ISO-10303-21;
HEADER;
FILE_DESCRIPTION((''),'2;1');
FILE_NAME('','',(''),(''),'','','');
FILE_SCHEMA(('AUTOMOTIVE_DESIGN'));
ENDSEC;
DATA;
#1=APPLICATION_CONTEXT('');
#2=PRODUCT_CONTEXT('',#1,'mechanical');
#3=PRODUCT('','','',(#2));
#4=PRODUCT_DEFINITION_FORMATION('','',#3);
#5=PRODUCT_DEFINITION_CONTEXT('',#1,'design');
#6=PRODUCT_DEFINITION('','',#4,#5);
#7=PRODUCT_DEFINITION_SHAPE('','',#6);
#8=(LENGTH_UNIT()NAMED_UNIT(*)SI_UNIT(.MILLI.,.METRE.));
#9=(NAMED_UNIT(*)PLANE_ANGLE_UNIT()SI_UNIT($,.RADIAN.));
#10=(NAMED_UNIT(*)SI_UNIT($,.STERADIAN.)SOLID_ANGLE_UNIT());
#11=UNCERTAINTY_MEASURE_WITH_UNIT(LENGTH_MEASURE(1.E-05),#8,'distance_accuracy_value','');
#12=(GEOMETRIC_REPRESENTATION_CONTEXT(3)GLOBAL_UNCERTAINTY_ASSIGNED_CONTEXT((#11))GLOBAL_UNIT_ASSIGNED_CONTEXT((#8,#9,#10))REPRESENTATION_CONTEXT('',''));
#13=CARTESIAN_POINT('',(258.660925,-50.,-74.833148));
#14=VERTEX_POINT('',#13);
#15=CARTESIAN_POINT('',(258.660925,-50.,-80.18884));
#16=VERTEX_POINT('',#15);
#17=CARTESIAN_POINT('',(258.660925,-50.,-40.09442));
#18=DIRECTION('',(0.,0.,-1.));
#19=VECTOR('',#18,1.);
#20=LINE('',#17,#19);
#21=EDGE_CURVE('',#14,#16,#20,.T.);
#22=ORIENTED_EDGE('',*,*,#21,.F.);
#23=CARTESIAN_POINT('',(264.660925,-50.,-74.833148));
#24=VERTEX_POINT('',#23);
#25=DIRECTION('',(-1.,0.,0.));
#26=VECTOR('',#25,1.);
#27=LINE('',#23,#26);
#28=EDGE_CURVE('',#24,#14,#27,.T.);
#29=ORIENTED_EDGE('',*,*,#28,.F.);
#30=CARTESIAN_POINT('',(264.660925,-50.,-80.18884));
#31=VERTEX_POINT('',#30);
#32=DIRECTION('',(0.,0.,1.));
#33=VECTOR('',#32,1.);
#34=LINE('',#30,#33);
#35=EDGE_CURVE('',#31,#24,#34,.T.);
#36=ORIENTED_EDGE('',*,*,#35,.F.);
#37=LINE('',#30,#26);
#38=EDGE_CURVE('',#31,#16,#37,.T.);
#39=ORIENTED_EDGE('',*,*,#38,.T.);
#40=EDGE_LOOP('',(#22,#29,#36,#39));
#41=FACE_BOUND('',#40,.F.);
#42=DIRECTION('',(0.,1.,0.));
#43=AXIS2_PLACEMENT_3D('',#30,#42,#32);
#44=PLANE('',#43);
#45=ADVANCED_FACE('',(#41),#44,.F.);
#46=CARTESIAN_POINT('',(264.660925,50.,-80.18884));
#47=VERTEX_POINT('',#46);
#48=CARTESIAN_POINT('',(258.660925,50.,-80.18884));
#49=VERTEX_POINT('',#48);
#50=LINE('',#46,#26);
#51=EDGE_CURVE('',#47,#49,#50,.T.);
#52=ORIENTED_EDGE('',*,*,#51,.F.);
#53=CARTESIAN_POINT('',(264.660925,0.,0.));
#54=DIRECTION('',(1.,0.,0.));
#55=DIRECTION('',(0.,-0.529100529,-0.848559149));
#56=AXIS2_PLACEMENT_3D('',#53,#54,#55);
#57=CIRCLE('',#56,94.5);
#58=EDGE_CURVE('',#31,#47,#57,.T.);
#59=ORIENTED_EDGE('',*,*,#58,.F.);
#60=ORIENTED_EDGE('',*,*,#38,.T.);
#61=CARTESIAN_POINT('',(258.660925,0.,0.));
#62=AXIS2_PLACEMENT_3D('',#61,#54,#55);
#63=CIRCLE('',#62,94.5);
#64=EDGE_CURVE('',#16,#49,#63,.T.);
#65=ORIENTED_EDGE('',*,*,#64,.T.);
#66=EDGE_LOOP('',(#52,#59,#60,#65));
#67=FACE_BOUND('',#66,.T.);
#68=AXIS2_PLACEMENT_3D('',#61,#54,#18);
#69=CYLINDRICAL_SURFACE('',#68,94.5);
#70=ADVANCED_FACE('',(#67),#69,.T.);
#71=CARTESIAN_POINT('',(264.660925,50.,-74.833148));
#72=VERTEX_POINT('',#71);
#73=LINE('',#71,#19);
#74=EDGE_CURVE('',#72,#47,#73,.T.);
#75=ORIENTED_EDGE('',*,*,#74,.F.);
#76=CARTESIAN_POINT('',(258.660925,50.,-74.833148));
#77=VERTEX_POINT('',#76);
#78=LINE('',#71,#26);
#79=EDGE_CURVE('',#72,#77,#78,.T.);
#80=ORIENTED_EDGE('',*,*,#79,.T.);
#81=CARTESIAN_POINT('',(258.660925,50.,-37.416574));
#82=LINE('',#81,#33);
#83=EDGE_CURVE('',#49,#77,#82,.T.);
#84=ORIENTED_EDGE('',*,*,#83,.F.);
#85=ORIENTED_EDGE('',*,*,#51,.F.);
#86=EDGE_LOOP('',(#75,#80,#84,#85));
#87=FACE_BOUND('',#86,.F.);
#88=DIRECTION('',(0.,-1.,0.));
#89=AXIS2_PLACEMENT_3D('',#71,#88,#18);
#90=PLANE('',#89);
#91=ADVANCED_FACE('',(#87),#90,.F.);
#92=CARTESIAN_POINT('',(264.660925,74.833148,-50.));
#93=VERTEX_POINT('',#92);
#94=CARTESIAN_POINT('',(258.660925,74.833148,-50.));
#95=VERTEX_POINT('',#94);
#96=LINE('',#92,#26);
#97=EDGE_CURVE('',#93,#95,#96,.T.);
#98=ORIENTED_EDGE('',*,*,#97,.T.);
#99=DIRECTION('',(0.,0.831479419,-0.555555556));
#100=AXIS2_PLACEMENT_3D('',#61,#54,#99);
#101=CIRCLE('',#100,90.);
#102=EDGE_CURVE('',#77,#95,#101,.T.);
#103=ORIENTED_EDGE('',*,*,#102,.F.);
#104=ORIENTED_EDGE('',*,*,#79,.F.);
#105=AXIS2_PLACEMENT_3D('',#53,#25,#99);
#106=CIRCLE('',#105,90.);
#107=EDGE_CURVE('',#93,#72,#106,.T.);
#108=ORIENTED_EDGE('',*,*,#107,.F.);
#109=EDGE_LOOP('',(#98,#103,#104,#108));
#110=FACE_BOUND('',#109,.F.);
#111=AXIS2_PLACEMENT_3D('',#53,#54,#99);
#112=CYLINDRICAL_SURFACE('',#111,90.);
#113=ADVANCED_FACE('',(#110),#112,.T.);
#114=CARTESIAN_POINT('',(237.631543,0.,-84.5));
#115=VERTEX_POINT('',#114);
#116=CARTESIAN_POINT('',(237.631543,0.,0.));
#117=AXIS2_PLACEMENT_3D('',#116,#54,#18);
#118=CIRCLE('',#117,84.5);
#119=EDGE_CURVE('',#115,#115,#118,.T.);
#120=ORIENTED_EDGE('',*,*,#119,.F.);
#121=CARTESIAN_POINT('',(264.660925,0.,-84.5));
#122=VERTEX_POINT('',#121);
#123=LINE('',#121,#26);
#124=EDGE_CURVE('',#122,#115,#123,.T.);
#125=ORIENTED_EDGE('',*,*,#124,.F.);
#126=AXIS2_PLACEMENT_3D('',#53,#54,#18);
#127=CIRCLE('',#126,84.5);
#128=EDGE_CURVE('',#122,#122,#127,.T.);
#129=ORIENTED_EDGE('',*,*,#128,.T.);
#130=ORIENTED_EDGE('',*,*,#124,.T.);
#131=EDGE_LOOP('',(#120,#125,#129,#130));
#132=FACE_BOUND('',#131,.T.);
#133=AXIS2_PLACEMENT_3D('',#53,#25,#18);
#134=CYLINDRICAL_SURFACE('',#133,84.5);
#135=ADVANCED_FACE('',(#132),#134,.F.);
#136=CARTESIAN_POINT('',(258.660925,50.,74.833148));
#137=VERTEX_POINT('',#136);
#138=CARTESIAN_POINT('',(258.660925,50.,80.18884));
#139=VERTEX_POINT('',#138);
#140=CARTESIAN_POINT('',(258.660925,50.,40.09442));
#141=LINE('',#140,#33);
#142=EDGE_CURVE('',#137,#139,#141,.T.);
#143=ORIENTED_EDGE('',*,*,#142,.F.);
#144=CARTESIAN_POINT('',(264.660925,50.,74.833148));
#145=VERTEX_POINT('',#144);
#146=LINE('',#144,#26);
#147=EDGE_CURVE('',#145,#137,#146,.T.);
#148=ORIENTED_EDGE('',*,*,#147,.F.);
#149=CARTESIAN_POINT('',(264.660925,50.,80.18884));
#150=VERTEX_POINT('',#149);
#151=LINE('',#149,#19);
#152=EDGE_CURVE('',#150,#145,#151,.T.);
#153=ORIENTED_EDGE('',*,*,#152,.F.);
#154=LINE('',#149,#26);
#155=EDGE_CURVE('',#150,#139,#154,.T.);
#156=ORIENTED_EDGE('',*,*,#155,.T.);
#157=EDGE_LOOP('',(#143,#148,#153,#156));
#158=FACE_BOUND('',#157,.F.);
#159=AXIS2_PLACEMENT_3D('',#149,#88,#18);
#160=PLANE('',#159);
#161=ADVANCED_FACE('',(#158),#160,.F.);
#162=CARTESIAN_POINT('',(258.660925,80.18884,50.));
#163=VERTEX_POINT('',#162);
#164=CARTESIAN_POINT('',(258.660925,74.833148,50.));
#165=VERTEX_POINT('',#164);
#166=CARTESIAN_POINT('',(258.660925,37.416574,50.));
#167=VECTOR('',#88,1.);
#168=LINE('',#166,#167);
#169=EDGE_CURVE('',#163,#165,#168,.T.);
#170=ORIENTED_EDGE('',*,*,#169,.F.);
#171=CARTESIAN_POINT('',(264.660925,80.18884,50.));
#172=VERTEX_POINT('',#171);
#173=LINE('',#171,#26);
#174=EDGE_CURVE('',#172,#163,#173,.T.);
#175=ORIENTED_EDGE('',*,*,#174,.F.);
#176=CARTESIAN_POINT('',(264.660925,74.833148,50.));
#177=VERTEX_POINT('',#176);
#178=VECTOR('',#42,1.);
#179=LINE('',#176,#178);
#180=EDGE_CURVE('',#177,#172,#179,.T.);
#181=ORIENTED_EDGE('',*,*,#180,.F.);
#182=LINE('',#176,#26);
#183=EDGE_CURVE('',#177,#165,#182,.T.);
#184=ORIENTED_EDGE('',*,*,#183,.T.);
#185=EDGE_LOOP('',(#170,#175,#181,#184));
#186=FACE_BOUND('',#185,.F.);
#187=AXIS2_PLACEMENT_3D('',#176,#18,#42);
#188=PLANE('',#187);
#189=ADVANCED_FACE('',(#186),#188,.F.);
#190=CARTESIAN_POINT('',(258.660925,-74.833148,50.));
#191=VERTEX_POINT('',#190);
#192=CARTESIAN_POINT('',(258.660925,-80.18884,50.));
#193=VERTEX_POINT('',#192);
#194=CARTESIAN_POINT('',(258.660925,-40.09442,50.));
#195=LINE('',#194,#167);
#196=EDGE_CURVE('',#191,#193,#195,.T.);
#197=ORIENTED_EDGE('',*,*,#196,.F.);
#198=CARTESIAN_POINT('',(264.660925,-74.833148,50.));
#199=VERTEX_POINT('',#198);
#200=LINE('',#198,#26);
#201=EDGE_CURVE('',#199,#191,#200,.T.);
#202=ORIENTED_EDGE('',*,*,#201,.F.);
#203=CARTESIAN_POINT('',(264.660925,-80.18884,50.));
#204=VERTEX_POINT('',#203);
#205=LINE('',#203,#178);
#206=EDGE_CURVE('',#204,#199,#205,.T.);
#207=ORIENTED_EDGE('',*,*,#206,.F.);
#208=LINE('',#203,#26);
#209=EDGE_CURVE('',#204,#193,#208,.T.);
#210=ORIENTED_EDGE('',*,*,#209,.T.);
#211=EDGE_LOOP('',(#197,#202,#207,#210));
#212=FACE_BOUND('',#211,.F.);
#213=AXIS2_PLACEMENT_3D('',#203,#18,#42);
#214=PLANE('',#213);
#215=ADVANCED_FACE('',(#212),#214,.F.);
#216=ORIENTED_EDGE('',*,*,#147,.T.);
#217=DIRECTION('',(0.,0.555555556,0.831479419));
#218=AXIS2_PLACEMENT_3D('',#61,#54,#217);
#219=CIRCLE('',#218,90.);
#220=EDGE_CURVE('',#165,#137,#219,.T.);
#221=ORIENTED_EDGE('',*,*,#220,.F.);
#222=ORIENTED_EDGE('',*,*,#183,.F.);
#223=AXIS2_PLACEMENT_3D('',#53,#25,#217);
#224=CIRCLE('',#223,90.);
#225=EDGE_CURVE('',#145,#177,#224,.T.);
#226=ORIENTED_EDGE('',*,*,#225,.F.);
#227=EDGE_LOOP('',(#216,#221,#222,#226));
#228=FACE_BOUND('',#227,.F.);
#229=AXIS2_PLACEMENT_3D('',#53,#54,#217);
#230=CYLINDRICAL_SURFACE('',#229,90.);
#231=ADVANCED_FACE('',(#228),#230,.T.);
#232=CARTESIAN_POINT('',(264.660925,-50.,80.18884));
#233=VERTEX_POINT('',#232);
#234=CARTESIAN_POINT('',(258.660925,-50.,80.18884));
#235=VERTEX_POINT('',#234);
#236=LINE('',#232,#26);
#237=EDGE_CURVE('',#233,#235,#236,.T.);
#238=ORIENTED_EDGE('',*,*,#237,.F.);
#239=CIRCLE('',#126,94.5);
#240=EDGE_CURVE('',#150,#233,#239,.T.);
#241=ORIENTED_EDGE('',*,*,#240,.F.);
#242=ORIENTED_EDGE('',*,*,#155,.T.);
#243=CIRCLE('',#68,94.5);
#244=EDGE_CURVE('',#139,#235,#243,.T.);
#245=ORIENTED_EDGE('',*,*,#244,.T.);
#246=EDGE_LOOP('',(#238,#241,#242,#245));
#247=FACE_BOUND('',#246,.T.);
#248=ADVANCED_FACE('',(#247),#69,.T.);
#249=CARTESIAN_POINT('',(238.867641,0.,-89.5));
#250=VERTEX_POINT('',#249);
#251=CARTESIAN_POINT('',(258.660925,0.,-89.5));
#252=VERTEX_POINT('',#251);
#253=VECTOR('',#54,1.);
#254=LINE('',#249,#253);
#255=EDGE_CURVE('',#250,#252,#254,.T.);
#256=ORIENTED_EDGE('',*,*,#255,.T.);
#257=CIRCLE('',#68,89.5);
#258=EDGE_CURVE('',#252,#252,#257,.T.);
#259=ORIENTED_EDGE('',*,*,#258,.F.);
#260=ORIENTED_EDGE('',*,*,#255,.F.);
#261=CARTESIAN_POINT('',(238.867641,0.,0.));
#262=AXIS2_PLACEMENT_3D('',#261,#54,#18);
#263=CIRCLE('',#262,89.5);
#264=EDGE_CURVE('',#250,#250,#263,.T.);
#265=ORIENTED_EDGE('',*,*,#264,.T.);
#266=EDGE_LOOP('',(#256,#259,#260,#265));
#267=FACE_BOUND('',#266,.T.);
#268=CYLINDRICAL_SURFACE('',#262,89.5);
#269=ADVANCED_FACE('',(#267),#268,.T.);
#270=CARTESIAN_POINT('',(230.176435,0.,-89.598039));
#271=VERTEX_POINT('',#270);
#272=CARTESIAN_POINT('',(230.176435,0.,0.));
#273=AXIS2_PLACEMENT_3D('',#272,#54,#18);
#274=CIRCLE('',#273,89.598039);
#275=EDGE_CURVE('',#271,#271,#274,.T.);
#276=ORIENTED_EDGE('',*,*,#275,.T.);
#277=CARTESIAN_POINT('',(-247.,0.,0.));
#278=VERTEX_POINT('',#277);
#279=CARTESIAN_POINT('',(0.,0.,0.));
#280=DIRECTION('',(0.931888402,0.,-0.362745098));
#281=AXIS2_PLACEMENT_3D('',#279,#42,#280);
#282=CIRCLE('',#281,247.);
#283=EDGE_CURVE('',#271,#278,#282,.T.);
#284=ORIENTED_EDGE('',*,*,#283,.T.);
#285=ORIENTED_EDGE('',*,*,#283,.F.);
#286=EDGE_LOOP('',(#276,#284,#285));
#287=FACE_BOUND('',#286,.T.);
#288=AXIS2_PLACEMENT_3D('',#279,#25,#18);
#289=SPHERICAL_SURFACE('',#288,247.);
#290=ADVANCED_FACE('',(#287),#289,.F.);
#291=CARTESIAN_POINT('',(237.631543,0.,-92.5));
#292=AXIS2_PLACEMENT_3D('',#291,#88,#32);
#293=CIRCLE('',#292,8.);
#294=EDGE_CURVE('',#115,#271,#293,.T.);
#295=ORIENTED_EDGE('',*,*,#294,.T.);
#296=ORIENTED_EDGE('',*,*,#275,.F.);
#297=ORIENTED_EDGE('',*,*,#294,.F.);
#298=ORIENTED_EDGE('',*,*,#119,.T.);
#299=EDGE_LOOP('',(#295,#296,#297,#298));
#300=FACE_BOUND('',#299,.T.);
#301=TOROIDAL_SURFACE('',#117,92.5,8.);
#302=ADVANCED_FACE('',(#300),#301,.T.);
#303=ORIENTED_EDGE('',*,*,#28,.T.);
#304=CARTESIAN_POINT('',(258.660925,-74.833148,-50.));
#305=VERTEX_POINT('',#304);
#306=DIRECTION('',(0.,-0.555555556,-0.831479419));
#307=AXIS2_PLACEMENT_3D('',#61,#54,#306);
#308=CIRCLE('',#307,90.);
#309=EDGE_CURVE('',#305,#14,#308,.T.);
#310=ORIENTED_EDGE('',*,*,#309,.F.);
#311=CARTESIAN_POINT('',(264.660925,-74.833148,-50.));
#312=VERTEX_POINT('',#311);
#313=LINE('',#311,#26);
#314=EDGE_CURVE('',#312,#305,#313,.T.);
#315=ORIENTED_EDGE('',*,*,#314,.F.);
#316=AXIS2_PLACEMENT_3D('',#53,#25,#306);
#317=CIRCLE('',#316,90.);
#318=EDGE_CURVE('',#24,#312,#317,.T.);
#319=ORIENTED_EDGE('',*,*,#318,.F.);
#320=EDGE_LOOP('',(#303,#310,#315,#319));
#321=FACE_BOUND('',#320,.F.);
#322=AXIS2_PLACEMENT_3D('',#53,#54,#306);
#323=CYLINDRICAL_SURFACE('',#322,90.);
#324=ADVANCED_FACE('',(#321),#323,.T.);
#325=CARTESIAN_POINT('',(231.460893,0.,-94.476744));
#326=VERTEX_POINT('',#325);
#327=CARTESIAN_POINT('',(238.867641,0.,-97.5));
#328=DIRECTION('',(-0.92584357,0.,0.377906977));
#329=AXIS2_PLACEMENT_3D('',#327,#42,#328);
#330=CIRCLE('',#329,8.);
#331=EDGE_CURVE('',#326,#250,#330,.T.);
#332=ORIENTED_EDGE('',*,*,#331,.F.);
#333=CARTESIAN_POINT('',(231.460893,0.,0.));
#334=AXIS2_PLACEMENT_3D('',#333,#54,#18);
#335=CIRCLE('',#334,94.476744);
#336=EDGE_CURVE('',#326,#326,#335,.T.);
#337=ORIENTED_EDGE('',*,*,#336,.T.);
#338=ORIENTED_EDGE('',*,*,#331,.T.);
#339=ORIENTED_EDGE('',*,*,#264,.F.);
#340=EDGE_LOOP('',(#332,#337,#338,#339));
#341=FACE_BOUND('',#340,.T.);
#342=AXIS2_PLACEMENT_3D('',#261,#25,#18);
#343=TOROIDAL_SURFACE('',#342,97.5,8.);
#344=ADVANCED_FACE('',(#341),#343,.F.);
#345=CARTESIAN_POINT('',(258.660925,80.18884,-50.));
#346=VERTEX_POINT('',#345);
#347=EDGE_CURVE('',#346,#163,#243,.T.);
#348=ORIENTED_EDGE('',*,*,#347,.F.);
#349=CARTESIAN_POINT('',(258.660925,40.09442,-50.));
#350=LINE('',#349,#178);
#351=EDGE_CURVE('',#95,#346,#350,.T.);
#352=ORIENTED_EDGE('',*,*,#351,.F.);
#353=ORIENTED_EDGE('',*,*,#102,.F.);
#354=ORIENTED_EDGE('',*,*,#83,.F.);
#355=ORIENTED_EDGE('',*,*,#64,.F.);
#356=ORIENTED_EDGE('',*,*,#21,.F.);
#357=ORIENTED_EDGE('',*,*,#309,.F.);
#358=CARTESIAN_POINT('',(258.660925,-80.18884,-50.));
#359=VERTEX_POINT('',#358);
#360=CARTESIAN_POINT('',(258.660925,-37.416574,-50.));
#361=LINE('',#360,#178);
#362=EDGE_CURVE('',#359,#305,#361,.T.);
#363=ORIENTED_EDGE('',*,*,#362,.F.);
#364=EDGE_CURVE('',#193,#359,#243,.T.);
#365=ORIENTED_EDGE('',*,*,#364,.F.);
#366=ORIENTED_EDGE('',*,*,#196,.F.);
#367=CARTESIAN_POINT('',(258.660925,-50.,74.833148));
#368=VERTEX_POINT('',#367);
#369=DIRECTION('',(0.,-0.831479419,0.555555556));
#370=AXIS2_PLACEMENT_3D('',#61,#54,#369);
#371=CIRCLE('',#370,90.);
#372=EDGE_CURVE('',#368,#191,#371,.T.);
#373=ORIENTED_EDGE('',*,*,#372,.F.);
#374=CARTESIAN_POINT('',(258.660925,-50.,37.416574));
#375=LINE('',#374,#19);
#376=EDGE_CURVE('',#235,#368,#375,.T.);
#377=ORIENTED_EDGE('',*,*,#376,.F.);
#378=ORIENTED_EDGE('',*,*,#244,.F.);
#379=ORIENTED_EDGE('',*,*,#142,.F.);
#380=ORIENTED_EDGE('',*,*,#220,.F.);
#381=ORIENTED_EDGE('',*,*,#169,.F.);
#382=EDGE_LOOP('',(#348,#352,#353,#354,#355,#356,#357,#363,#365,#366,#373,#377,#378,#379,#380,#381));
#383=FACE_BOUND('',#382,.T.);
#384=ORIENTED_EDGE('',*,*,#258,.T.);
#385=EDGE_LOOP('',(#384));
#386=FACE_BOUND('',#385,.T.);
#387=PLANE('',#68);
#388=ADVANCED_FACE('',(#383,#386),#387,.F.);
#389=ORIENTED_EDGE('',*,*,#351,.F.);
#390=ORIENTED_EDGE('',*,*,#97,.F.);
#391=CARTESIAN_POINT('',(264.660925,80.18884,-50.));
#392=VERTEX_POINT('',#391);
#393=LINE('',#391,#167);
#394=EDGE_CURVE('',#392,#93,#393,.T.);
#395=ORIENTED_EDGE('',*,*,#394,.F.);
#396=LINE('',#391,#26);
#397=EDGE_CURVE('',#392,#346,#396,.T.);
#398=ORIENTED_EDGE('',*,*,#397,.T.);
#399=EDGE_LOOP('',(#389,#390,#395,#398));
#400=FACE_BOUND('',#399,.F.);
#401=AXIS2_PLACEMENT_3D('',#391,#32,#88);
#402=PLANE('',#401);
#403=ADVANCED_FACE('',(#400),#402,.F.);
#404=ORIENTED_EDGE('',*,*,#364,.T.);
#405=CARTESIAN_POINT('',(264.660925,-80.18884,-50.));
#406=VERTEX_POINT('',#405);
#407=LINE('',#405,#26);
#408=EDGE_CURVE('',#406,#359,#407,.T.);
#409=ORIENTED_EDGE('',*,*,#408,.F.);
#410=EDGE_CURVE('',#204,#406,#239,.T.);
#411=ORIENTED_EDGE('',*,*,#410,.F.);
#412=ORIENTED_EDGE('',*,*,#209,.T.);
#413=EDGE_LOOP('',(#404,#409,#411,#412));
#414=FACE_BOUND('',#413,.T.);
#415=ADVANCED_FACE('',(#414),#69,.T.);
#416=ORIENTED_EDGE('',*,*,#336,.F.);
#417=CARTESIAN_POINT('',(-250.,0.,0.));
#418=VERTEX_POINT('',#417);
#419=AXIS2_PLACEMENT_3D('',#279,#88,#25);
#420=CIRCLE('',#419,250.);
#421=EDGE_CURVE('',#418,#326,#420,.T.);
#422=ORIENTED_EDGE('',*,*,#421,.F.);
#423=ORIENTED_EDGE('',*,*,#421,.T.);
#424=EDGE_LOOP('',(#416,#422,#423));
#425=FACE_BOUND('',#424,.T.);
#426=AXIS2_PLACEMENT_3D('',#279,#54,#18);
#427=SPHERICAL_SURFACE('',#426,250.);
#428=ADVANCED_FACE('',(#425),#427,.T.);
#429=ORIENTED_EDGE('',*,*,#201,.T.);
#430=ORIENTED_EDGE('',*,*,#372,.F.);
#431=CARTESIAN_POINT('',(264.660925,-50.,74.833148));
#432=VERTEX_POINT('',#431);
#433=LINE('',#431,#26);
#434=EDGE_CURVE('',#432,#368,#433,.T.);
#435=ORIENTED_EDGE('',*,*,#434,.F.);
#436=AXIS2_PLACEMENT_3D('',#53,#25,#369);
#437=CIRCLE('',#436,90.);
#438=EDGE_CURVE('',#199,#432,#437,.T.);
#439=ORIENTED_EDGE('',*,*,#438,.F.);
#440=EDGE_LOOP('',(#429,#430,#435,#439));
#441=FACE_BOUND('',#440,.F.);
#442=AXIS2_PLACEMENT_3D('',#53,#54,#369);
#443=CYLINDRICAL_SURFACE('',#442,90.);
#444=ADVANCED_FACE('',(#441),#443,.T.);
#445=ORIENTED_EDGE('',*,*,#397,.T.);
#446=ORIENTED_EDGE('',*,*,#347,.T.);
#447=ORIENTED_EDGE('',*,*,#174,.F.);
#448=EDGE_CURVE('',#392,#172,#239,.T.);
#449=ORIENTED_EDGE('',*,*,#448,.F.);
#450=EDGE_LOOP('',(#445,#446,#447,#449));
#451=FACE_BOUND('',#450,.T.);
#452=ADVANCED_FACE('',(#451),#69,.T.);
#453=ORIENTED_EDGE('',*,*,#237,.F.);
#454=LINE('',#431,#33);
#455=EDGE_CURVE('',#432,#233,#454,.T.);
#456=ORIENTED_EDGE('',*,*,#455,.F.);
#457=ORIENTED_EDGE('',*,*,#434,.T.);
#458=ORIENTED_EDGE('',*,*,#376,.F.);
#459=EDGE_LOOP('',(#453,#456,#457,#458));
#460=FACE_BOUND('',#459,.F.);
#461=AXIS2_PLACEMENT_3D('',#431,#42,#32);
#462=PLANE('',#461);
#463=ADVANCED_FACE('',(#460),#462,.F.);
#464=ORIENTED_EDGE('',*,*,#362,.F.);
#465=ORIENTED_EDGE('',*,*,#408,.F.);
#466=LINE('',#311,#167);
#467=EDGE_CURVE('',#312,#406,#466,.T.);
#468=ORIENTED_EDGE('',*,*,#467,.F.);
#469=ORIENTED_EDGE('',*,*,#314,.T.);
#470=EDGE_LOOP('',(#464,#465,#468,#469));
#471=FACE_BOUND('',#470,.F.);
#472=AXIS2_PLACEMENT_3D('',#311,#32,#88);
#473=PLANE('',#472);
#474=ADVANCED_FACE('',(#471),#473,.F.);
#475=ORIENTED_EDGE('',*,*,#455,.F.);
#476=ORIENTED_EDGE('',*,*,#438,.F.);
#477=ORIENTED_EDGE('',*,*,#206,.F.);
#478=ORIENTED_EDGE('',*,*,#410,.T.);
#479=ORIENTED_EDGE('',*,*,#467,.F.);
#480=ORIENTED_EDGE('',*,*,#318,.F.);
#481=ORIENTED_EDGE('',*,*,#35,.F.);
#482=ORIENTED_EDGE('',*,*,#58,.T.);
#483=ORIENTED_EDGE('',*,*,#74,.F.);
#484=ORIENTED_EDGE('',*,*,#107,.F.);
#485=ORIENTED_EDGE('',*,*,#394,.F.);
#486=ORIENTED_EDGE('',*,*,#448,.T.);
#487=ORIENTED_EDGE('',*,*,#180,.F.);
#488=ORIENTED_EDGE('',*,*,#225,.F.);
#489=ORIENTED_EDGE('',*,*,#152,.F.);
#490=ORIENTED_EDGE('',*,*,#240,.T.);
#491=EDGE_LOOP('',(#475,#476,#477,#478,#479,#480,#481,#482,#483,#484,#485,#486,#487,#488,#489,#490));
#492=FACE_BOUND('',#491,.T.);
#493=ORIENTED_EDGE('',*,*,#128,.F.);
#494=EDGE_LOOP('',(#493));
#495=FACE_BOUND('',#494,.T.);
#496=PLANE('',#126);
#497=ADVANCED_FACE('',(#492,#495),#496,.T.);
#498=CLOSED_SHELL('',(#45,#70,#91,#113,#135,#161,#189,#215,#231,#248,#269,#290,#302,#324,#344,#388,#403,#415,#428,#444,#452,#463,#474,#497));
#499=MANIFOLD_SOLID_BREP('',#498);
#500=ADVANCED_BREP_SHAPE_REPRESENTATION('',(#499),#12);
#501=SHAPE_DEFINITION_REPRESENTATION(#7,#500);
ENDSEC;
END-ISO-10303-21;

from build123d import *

# Parameters (mm, degrees)
F3_DEPTH = 25


with BuildPart() as f1:
    # F0 (on Front) → F1 (revolve)
    with BuildSketch(Plane.XZ):
        with BuildLine():
            ThreePointArc((230.1764353028, -89.5980392157), (-45.581906938, -242.757677036), (-247, 0))
            Line((-247, 0), (-250, 0))
            ThreePointArc((-250, 0), (-48.1392607307, -245.3214454064), (231.4608926104, -94.476744186))
            ThreePointArc((231.4608926104, -94.476744186), (234.4059176567, -90.8597422297), (238.8676411739, -89.5))
            Line((238.8676411739, -89.5), (258.6609246731, -89.5))
            Line((258.6609246731, -89.5), (258.6609246731, -94.5))
            Line((258.6609246731, -94.5), (264.6609246731, -94.5))
            Line((264.6609246731, -94.5), (264.6609246731, -84.5))
            Line((264.6609246731, -84.5), (237.6315425191, -84.5))
            ThreePointArc((237.6315425191, -84.5), (233.1157749362, -85.8963765146), (230.1764353028, -89.5980392157))
        make_face()
    revolve(axis=Axis((132.3304623365, 0, 0), (1, 0, 0)))

    # F2 (on face) → F3 (cut)
    with BuildSketch(Plane.YZ.offset(264.6609246731)):
        with BuildLine():
            ThreePointArc((50, 74.8331477355), (63.6396103068, 63.6396103068), (74.8331477355, 50))
            Line((74.8331477355, 50), (80.1888396225, 50))
            ThreePointArc((80.1888396225, 50), (66.8215908221, 66.8215908221), (50, 80.1888396225))
            Line((50, 80.1888396225), (50, 74.8331477355))
        make_face()
        with BuildLine():
            Line((80.1888396225, -50), (74.8331477355, -50))
            ThreePointArc((74.8331477355, -50), (63.6396103068, -63.6396103068), (50, -74.8331477355))
            Line((50, -74.8331477355), (50, -80.1888396225))
            ThreePointArc((50, -80.1888396225), (66.8215908221, -66.8215908221), (80.1888396225, -50))
        make_face()
        with BuildLine():
            Line((119.5877417922, 50), (80.1888396225, 50))
            ThreePointArc((80.1888396225, 50), (90.8517895925, 26.0038906289), (94.5, 0))
            ThreePointArc((94.5, 0), (90.8517895925, -26.0038906289), (80.1888396225, -50))
            Line((80.1888396225, -50), (119.5877417922, -50))
            Line((119.5877417922, -50), (119.5877417922, 50))
        make_face()
        with BuildLine():
            ThreePointArc((-74.8331477355, 50), (-63.6396103068, 63.6396103068), (-50, 74.8331477355))
            Line((-50, 74.8331477355), (-50, 80.1888396225))
            ThreePointArc((-50, 80.1888396225), (-66.8215908221, 66.8215908221), (-80.1888396225, 50))
            Line((-80.1888396225, 50), (-74.8331477355, 50))
        make_face()
        with BuildLine():
            Line((-50, -80.1888396225), (-50, -74.8331477355))
            ThreePointArc((-50, -74.8331477355), (-63.6396103068, -63.6396103068), (-74.8331477355, -50))
            Line((-74.8331477355, -50), (-80.1888396225, -50))
            ThreePointArc((-80.1888396225, -50), (-66.8215908221, -66.8215908221), (-50, -80.1888396225))
        make_face()
        with BuildLine():
            ThreePointArc((-80.1888396225, -50), (-94.5, 0), (-80.1888396225, 50))
            Line((-80.1888396225, 50), (-119.5877417922, 50))
            Line((-119.5877417922, 50), (-119.5877417922, -50))
            Line((-119.5877417922, -50), (-80.1888396225, -50))
        make_face()
    extrude(amount=-F3_DEPTH, mode=Mode.SUBTRACT)


solid = f1.part
